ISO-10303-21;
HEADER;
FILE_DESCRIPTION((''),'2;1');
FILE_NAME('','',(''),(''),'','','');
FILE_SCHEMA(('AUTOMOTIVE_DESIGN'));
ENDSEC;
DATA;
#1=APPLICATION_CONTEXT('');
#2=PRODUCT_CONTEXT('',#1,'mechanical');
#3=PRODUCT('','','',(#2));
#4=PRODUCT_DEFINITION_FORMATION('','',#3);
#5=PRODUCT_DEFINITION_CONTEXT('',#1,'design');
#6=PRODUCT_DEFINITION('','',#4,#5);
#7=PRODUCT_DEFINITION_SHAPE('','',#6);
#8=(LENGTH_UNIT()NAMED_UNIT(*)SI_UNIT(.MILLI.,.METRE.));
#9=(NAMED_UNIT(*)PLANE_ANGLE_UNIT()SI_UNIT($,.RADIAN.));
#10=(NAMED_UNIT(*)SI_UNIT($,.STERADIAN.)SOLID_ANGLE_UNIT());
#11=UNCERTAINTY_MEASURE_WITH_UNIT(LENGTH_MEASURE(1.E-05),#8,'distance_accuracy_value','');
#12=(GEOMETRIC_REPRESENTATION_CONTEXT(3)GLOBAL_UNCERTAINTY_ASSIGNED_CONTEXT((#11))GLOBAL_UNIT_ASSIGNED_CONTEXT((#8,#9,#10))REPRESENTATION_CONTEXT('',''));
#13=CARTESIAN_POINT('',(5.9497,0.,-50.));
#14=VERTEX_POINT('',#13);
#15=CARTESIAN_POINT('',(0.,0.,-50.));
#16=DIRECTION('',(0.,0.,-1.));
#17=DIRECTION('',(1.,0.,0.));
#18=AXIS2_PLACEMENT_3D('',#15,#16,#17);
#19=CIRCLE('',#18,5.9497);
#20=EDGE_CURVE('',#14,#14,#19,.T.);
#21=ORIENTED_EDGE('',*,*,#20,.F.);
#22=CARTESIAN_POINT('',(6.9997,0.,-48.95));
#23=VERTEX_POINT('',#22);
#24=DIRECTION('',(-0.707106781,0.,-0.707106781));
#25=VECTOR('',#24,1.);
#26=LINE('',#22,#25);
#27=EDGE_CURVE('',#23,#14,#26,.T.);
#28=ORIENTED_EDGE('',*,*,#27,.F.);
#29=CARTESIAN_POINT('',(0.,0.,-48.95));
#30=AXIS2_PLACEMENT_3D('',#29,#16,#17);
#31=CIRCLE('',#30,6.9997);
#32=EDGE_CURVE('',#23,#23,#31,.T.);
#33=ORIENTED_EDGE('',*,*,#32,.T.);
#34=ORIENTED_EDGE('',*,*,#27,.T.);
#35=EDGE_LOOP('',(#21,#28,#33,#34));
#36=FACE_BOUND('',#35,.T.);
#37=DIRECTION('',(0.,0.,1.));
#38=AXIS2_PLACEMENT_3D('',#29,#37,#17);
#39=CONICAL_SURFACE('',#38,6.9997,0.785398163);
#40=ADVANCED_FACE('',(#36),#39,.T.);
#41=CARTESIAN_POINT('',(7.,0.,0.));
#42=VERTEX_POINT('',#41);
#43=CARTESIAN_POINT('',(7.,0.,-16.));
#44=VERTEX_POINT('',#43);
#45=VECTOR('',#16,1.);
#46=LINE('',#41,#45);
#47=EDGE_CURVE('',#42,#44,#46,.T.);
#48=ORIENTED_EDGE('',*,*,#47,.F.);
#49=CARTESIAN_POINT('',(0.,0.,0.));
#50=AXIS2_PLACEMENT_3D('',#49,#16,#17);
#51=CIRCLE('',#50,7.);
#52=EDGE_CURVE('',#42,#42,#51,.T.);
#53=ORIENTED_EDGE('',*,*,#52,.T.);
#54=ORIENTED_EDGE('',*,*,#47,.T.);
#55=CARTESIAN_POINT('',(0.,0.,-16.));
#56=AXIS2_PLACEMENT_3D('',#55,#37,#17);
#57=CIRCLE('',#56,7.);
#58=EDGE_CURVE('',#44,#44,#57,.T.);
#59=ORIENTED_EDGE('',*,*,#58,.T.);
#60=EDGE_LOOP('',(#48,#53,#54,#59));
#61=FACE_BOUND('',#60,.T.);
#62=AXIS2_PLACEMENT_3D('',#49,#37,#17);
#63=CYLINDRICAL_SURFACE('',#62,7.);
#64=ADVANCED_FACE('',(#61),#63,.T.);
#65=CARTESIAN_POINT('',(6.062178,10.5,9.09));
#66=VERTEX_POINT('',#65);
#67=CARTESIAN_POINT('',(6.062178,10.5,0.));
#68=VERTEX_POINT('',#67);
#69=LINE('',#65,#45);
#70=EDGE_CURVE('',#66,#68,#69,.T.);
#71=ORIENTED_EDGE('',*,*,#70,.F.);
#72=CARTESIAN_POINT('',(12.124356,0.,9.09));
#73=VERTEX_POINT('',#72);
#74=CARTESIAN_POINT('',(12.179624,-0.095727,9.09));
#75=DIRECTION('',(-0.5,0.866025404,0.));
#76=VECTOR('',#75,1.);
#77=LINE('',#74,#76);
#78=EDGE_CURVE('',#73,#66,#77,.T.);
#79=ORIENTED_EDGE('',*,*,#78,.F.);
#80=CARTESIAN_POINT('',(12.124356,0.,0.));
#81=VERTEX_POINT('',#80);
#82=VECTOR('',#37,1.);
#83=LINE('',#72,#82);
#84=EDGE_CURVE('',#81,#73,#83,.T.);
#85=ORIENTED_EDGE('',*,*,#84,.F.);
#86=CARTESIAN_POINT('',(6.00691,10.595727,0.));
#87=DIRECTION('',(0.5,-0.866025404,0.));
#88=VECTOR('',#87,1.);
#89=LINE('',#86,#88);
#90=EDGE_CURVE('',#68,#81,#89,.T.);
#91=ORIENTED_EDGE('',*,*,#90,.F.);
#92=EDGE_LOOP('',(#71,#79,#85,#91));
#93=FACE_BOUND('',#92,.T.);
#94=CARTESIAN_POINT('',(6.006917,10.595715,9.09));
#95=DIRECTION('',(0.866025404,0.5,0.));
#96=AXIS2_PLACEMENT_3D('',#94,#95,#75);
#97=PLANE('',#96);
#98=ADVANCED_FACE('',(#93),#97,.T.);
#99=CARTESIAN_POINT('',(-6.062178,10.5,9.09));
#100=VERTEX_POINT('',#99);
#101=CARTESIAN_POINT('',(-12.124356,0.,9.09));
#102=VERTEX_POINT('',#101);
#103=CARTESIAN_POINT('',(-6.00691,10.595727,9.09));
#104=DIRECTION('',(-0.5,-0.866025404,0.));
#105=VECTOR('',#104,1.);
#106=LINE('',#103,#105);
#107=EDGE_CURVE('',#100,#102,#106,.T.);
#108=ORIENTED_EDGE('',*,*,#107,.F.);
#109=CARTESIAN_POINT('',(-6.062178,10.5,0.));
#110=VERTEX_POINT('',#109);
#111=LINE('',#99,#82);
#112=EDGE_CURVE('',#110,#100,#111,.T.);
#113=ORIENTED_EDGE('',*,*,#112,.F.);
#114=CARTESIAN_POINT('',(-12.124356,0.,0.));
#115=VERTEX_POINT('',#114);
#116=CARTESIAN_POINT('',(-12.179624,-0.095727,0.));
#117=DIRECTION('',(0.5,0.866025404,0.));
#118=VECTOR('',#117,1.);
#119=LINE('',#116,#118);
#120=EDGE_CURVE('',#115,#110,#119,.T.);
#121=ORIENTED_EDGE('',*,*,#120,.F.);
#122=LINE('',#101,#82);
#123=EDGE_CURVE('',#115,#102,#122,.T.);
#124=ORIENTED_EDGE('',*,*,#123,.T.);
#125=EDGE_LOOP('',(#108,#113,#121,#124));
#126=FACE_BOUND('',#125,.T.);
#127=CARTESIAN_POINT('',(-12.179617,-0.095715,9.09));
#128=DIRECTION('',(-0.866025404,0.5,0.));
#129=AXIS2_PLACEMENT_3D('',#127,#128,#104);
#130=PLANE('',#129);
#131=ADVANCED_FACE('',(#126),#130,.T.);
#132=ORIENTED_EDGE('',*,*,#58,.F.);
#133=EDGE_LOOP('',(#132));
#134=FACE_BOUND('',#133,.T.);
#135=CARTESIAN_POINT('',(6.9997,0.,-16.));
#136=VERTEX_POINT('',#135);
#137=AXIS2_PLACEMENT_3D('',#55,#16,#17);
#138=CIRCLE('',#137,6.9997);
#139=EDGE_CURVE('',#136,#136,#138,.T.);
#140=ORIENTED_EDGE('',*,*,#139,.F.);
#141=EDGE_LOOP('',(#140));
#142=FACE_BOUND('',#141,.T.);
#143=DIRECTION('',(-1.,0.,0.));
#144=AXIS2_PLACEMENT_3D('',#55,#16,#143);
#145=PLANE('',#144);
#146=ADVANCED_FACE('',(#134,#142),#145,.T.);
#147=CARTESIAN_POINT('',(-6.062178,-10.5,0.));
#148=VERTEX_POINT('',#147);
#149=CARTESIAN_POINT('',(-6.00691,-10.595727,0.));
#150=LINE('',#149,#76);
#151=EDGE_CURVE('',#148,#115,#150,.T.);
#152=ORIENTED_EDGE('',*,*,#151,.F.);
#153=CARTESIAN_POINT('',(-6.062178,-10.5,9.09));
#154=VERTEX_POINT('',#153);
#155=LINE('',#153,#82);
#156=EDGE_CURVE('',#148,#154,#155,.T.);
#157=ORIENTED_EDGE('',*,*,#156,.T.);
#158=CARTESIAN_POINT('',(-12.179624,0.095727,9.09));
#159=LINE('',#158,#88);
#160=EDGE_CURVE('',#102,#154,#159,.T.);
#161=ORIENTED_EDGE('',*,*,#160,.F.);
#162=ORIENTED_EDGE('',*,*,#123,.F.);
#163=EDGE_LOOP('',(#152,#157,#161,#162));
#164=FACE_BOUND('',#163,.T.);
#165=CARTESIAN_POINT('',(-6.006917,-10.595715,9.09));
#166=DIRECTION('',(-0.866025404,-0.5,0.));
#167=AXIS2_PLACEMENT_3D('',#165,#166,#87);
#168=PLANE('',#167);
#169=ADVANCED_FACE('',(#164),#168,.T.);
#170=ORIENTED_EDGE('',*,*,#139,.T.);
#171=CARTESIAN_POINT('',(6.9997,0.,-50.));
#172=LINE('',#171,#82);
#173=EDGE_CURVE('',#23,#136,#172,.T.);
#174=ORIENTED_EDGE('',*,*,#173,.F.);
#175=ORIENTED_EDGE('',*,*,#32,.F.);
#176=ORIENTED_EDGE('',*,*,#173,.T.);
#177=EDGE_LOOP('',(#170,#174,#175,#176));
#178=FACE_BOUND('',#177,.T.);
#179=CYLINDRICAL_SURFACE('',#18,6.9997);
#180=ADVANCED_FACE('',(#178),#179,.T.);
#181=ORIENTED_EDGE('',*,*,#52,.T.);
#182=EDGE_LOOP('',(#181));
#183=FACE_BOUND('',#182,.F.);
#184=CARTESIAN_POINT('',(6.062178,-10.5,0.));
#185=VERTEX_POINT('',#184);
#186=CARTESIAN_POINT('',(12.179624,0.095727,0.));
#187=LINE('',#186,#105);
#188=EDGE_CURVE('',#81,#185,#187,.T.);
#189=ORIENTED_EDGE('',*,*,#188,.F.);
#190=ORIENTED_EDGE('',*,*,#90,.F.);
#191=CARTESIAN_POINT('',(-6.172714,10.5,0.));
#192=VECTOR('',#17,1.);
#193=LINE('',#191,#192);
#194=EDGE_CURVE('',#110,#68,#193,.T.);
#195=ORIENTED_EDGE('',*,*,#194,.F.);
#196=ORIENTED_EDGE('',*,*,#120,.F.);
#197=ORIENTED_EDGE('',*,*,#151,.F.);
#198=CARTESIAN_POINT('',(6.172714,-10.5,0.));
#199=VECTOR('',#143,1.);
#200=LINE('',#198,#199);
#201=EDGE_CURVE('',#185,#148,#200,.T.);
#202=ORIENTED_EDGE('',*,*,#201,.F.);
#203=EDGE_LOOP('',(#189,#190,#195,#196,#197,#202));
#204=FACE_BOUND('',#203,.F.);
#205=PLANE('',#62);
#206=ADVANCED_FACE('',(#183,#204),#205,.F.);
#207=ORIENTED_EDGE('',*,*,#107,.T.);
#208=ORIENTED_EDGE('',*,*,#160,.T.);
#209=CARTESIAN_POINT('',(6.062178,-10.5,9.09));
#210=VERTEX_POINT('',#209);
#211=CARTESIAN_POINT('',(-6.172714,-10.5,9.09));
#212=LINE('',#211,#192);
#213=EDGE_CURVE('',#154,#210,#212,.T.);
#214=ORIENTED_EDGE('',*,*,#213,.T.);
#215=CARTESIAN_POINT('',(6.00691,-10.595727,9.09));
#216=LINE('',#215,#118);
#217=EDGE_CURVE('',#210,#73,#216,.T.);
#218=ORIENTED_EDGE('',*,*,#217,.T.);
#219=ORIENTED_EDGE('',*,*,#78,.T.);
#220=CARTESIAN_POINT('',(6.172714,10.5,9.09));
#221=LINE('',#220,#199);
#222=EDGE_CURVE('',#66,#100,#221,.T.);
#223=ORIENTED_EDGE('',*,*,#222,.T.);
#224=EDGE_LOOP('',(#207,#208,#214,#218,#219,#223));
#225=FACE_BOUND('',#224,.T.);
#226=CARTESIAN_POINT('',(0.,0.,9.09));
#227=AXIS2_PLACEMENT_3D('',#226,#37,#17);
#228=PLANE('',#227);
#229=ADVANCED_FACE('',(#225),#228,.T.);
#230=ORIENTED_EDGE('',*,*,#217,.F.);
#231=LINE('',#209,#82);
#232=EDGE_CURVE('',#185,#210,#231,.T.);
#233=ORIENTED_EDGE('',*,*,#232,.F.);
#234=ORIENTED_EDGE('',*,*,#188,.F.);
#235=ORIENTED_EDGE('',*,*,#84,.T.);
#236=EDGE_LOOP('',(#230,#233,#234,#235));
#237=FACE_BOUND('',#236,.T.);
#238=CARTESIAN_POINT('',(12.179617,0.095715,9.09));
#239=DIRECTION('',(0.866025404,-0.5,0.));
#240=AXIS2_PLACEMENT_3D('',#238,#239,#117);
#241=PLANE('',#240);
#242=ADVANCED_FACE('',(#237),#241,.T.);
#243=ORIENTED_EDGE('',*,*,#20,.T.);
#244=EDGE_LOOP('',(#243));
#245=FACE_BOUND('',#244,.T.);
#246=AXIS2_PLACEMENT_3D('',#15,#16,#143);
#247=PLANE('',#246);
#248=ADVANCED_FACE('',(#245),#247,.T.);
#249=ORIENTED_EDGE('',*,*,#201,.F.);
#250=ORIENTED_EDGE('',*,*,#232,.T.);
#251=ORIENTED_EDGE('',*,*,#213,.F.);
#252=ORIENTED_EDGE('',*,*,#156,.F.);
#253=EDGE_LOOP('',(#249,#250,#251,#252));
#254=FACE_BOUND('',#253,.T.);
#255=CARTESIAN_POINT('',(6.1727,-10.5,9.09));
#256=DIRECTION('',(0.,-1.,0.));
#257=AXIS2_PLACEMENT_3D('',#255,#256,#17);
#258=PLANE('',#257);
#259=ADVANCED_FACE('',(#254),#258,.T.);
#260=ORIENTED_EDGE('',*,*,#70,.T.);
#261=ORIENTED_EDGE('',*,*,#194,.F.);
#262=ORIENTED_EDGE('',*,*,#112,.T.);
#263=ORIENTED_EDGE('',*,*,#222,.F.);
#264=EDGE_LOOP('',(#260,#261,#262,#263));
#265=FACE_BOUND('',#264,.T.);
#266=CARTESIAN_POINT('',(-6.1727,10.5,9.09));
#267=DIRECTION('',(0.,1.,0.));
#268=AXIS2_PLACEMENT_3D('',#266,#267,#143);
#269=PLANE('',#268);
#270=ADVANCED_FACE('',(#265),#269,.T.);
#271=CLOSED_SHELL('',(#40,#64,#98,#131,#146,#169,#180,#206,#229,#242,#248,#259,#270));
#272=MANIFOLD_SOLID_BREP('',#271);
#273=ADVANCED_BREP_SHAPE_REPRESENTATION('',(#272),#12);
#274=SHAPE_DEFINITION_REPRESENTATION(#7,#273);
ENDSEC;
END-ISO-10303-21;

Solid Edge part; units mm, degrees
sketch "Sketch1" plane through (0, 0, 0) normal (0, 0, 1) x (1, 0, 0)
  circle A0 centre (0, 0) radius 12.18
  dimension "D1" = 24.36
extrude "Protrusion1" add sketch "Sketch1" along normal blind 9.09
sketch "Sketch2" plane through (0, 0, 0) normal (0, 0, -1) x (1, 0, 0)
  circle A0 centre (0, 0) radius 7
extrude "Protrusion2" add sketch "Sketch2" along normal blind 50
sketch "Sketch3" plane through (0, 0, -50) normal (0, 0, -1) x (1, 0, 0)
  circle A0 centre (0, 0) radius 6.9997
extrude "Cutout1" cut sketch "Sketch3" against normal blind 34 flip side to cut
chamfer "Chamfer_1" distance 1.05 angle 45 1 edges at (-6.9997, 0, -50)
sketch "Sketch4" plane through (0, 0, 9.09) normal (0, 0, 1) x (1, 0, 0)
  line L0 (-6.1727, 10.5) -> (6.1727, 10.5)
  dimension "D1" = 21
extrude "Cutout2" cut sketch "Sketch4" against normal up to next material side at (0, 10.55, 9.09)
pattern_circular "Pattern1" count 6 over 360 about axis through (0, 0, 9.09) along (0, 0, 1) of "Cutout2"
properties part number "200062"
